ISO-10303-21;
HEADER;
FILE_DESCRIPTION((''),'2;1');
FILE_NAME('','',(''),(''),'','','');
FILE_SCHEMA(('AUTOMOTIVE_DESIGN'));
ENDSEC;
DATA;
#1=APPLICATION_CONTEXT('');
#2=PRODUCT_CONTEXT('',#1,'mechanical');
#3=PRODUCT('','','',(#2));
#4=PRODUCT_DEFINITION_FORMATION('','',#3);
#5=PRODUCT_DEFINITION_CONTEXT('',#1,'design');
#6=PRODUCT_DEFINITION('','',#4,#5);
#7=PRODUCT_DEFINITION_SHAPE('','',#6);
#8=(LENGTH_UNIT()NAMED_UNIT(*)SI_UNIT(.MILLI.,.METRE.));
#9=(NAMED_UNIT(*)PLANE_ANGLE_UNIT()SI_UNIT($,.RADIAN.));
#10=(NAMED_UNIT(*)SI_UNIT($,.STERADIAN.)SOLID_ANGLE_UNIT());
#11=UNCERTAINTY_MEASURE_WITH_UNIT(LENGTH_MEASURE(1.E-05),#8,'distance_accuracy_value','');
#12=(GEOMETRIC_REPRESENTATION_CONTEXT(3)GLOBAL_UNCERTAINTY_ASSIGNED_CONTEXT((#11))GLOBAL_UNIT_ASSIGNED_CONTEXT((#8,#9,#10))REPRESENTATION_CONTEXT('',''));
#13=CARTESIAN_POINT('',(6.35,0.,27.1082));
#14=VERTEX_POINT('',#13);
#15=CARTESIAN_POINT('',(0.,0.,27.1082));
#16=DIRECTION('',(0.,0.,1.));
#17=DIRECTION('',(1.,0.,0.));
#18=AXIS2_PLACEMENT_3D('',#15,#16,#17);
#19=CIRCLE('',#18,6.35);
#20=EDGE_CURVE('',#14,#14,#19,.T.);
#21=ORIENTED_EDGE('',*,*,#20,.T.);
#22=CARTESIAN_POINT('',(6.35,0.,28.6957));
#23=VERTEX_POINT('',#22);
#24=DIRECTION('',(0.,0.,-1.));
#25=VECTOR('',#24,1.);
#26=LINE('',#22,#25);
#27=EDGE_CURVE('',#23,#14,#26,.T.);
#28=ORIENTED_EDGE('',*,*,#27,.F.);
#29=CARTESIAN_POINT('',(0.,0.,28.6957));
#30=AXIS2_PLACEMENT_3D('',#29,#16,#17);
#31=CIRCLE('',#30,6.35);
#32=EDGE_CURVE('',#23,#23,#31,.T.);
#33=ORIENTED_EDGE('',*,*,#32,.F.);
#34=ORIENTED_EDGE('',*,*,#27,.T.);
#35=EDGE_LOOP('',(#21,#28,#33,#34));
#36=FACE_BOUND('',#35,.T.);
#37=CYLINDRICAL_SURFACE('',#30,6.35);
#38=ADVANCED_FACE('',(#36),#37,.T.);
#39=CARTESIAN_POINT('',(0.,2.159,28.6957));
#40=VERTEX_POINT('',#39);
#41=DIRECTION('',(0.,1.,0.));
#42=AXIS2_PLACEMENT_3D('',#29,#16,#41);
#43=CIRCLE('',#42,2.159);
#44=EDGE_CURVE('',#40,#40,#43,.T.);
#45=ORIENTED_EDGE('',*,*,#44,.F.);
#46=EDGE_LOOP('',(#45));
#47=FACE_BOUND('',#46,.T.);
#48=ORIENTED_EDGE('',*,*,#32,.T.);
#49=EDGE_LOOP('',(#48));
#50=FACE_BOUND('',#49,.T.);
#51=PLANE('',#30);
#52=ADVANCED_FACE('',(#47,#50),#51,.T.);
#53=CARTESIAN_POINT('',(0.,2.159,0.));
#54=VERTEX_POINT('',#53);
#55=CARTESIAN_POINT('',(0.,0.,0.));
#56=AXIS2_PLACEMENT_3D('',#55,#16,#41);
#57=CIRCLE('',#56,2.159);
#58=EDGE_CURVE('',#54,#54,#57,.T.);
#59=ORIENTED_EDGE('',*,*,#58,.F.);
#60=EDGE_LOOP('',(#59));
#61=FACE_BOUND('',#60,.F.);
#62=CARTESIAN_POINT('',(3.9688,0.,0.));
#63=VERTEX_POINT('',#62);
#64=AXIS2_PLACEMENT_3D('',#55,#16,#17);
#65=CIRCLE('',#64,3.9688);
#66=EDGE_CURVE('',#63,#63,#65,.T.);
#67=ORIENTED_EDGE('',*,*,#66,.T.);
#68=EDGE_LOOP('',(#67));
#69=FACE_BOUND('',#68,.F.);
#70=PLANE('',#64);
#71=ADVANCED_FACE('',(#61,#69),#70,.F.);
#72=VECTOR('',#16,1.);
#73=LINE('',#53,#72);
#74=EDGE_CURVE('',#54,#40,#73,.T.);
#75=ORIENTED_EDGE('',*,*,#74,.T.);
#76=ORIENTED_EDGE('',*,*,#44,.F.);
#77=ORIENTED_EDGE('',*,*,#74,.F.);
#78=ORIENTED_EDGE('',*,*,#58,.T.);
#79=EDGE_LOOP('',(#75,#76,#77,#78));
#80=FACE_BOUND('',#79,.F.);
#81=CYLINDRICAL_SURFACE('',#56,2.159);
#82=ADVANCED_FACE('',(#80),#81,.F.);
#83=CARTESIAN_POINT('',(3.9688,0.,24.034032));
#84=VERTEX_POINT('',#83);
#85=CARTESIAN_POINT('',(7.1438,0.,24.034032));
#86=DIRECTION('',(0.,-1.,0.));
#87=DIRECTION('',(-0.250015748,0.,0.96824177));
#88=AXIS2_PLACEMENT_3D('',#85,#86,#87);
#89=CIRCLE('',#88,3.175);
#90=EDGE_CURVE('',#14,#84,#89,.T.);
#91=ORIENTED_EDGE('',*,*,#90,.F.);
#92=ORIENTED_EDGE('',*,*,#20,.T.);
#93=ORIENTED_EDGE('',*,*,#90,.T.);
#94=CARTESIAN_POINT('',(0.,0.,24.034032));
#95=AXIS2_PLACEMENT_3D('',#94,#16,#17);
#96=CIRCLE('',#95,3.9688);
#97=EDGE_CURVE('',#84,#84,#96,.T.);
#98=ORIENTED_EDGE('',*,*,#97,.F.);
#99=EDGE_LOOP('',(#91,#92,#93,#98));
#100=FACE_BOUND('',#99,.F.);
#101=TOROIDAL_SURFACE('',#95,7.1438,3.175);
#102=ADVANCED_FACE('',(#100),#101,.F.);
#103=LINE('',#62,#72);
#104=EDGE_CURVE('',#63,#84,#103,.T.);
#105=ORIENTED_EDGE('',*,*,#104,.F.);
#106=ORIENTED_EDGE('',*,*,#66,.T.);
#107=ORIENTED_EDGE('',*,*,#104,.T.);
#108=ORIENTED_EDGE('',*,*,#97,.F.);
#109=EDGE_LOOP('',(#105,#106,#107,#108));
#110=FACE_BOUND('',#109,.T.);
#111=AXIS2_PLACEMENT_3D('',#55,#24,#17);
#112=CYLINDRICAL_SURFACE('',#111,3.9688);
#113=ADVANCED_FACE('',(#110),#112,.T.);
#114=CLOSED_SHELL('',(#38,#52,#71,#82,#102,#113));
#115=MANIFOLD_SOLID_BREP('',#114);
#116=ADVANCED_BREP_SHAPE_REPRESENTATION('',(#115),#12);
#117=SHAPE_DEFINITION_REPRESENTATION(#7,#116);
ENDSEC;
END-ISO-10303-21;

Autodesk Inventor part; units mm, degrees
ref_plane "YZ Plane" through (0, 0, 0) normal (1, 0, 0) x (0, 1, 0)
ref_plane "XZ Plane" through (0, 0, 0) normal (0, 1, 0) x (-1, 0, 0)
ref_plane "XY Plane" through (0, 0, 0) normal (0, 0, 1) x (1, 0, 0)
sketch "Sketch1" plane through (0, 0, 0) normal (0, 0, 1) x (1, 0, 0)
  circle A0 centre (0, 0) radius 3.9688
  dimension "d0" = 7.9375
extrude "Extrusion1" add sketch "Sketch1" along normal blind 28.6957
hole "Hole1" at (0, 0, 0) direction (0, 0, 1) diameter 4.318 end through all clearance for "Socket Head Cap Screw" size "#8" standard "Ansi Unified Screw Threads"
sketch "Sketch2" plane through (0, 0, 28.6957) normal (0, 0, 1) x (1, 0, 0)
  circle A0 centre (0, 0) radius 3.9687 projected
  circle A1 centre (0, 0) radius 6.35
  dimension "d10" = 12.7
extrude "Extrusion2" add sketch "Sketch2" against normal blind 1.5875
fillet "Fillet1" radius 3.175 1 edges at (-3.9687, 0, 27.1082)
properties part number "Supporting Plate Standoff Thin"
